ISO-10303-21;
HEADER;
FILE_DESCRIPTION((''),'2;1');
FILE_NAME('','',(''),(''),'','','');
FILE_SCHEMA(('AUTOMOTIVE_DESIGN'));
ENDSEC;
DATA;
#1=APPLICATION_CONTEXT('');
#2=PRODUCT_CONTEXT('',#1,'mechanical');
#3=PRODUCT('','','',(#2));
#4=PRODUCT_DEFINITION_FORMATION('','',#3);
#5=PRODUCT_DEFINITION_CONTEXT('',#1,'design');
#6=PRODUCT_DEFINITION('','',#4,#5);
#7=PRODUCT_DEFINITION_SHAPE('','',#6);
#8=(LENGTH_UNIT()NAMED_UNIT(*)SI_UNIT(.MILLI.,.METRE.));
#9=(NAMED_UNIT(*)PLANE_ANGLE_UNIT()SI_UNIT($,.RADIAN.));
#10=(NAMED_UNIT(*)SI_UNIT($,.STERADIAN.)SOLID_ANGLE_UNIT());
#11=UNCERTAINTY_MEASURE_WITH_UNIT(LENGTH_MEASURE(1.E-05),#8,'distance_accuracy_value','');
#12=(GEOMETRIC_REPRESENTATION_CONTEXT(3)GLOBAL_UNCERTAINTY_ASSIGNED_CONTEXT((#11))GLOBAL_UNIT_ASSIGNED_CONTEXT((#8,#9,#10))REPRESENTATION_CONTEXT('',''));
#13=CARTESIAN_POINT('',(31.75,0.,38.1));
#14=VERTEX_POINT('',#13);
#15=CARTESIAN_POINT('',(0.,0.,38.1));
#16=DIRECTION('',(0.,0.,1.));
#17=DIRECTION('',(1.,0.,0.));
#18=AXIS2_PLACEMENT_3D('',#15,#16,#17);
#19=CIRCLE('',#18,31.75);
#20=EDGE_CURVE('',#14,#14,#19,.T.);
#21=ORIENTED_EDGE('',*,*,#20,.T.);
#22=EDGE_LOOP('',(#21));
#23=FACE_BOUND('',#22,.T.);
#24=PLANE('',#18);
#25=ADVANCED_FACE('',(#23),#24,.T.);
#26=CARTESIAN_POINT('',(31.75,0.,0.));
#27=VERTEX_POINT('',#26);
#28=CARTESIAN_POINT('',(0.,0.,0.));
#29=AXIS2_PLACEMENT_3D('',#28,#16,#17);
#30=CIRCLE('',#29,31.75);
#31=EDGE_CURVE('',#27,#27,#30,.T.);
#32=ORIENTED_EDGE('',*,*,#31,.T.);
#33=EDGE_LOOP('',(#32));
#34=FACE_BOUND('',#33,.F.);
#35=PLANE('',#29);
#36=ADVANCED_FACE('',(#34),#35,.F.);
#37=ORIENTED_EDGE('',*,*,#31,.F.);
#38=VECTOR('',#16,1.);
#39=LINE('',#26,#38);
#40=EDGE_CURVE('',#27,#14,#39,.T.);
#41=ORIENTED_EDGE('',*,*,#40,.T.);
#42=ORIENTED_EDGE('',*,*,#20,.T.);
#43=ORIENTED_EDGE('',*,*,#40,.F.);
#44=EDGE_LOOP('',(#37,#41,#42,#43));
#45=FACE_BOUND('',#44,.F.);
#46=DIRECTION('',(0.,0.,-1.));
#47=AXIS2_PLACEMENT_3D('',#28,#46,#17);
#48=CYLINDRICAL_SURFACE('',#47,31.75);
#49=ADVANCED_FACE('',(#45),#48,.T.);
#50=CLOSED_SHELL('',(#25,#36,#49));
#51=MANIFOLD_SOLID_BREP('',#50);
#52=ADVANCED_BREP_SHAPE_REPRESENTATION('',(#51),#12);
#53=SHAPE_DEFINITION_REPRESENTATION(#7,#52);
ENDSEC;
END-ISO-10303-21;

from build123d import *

# Parameters (mm, degrees)
F0_R     = 31.75
F1_DEPTH = 38.1


# Not quite as in the source:
# - a feature of the source that left no trace in its solid (it failed there, or was rolled back) is left out


with BuildPart() as f1:
    # F0 (on Top) → F1 (new body)
    with BuildSketch(Plane.XY):
        Circle(F0_R)
    extrude(amount=F1_DEPTH)


solid = f1.part
